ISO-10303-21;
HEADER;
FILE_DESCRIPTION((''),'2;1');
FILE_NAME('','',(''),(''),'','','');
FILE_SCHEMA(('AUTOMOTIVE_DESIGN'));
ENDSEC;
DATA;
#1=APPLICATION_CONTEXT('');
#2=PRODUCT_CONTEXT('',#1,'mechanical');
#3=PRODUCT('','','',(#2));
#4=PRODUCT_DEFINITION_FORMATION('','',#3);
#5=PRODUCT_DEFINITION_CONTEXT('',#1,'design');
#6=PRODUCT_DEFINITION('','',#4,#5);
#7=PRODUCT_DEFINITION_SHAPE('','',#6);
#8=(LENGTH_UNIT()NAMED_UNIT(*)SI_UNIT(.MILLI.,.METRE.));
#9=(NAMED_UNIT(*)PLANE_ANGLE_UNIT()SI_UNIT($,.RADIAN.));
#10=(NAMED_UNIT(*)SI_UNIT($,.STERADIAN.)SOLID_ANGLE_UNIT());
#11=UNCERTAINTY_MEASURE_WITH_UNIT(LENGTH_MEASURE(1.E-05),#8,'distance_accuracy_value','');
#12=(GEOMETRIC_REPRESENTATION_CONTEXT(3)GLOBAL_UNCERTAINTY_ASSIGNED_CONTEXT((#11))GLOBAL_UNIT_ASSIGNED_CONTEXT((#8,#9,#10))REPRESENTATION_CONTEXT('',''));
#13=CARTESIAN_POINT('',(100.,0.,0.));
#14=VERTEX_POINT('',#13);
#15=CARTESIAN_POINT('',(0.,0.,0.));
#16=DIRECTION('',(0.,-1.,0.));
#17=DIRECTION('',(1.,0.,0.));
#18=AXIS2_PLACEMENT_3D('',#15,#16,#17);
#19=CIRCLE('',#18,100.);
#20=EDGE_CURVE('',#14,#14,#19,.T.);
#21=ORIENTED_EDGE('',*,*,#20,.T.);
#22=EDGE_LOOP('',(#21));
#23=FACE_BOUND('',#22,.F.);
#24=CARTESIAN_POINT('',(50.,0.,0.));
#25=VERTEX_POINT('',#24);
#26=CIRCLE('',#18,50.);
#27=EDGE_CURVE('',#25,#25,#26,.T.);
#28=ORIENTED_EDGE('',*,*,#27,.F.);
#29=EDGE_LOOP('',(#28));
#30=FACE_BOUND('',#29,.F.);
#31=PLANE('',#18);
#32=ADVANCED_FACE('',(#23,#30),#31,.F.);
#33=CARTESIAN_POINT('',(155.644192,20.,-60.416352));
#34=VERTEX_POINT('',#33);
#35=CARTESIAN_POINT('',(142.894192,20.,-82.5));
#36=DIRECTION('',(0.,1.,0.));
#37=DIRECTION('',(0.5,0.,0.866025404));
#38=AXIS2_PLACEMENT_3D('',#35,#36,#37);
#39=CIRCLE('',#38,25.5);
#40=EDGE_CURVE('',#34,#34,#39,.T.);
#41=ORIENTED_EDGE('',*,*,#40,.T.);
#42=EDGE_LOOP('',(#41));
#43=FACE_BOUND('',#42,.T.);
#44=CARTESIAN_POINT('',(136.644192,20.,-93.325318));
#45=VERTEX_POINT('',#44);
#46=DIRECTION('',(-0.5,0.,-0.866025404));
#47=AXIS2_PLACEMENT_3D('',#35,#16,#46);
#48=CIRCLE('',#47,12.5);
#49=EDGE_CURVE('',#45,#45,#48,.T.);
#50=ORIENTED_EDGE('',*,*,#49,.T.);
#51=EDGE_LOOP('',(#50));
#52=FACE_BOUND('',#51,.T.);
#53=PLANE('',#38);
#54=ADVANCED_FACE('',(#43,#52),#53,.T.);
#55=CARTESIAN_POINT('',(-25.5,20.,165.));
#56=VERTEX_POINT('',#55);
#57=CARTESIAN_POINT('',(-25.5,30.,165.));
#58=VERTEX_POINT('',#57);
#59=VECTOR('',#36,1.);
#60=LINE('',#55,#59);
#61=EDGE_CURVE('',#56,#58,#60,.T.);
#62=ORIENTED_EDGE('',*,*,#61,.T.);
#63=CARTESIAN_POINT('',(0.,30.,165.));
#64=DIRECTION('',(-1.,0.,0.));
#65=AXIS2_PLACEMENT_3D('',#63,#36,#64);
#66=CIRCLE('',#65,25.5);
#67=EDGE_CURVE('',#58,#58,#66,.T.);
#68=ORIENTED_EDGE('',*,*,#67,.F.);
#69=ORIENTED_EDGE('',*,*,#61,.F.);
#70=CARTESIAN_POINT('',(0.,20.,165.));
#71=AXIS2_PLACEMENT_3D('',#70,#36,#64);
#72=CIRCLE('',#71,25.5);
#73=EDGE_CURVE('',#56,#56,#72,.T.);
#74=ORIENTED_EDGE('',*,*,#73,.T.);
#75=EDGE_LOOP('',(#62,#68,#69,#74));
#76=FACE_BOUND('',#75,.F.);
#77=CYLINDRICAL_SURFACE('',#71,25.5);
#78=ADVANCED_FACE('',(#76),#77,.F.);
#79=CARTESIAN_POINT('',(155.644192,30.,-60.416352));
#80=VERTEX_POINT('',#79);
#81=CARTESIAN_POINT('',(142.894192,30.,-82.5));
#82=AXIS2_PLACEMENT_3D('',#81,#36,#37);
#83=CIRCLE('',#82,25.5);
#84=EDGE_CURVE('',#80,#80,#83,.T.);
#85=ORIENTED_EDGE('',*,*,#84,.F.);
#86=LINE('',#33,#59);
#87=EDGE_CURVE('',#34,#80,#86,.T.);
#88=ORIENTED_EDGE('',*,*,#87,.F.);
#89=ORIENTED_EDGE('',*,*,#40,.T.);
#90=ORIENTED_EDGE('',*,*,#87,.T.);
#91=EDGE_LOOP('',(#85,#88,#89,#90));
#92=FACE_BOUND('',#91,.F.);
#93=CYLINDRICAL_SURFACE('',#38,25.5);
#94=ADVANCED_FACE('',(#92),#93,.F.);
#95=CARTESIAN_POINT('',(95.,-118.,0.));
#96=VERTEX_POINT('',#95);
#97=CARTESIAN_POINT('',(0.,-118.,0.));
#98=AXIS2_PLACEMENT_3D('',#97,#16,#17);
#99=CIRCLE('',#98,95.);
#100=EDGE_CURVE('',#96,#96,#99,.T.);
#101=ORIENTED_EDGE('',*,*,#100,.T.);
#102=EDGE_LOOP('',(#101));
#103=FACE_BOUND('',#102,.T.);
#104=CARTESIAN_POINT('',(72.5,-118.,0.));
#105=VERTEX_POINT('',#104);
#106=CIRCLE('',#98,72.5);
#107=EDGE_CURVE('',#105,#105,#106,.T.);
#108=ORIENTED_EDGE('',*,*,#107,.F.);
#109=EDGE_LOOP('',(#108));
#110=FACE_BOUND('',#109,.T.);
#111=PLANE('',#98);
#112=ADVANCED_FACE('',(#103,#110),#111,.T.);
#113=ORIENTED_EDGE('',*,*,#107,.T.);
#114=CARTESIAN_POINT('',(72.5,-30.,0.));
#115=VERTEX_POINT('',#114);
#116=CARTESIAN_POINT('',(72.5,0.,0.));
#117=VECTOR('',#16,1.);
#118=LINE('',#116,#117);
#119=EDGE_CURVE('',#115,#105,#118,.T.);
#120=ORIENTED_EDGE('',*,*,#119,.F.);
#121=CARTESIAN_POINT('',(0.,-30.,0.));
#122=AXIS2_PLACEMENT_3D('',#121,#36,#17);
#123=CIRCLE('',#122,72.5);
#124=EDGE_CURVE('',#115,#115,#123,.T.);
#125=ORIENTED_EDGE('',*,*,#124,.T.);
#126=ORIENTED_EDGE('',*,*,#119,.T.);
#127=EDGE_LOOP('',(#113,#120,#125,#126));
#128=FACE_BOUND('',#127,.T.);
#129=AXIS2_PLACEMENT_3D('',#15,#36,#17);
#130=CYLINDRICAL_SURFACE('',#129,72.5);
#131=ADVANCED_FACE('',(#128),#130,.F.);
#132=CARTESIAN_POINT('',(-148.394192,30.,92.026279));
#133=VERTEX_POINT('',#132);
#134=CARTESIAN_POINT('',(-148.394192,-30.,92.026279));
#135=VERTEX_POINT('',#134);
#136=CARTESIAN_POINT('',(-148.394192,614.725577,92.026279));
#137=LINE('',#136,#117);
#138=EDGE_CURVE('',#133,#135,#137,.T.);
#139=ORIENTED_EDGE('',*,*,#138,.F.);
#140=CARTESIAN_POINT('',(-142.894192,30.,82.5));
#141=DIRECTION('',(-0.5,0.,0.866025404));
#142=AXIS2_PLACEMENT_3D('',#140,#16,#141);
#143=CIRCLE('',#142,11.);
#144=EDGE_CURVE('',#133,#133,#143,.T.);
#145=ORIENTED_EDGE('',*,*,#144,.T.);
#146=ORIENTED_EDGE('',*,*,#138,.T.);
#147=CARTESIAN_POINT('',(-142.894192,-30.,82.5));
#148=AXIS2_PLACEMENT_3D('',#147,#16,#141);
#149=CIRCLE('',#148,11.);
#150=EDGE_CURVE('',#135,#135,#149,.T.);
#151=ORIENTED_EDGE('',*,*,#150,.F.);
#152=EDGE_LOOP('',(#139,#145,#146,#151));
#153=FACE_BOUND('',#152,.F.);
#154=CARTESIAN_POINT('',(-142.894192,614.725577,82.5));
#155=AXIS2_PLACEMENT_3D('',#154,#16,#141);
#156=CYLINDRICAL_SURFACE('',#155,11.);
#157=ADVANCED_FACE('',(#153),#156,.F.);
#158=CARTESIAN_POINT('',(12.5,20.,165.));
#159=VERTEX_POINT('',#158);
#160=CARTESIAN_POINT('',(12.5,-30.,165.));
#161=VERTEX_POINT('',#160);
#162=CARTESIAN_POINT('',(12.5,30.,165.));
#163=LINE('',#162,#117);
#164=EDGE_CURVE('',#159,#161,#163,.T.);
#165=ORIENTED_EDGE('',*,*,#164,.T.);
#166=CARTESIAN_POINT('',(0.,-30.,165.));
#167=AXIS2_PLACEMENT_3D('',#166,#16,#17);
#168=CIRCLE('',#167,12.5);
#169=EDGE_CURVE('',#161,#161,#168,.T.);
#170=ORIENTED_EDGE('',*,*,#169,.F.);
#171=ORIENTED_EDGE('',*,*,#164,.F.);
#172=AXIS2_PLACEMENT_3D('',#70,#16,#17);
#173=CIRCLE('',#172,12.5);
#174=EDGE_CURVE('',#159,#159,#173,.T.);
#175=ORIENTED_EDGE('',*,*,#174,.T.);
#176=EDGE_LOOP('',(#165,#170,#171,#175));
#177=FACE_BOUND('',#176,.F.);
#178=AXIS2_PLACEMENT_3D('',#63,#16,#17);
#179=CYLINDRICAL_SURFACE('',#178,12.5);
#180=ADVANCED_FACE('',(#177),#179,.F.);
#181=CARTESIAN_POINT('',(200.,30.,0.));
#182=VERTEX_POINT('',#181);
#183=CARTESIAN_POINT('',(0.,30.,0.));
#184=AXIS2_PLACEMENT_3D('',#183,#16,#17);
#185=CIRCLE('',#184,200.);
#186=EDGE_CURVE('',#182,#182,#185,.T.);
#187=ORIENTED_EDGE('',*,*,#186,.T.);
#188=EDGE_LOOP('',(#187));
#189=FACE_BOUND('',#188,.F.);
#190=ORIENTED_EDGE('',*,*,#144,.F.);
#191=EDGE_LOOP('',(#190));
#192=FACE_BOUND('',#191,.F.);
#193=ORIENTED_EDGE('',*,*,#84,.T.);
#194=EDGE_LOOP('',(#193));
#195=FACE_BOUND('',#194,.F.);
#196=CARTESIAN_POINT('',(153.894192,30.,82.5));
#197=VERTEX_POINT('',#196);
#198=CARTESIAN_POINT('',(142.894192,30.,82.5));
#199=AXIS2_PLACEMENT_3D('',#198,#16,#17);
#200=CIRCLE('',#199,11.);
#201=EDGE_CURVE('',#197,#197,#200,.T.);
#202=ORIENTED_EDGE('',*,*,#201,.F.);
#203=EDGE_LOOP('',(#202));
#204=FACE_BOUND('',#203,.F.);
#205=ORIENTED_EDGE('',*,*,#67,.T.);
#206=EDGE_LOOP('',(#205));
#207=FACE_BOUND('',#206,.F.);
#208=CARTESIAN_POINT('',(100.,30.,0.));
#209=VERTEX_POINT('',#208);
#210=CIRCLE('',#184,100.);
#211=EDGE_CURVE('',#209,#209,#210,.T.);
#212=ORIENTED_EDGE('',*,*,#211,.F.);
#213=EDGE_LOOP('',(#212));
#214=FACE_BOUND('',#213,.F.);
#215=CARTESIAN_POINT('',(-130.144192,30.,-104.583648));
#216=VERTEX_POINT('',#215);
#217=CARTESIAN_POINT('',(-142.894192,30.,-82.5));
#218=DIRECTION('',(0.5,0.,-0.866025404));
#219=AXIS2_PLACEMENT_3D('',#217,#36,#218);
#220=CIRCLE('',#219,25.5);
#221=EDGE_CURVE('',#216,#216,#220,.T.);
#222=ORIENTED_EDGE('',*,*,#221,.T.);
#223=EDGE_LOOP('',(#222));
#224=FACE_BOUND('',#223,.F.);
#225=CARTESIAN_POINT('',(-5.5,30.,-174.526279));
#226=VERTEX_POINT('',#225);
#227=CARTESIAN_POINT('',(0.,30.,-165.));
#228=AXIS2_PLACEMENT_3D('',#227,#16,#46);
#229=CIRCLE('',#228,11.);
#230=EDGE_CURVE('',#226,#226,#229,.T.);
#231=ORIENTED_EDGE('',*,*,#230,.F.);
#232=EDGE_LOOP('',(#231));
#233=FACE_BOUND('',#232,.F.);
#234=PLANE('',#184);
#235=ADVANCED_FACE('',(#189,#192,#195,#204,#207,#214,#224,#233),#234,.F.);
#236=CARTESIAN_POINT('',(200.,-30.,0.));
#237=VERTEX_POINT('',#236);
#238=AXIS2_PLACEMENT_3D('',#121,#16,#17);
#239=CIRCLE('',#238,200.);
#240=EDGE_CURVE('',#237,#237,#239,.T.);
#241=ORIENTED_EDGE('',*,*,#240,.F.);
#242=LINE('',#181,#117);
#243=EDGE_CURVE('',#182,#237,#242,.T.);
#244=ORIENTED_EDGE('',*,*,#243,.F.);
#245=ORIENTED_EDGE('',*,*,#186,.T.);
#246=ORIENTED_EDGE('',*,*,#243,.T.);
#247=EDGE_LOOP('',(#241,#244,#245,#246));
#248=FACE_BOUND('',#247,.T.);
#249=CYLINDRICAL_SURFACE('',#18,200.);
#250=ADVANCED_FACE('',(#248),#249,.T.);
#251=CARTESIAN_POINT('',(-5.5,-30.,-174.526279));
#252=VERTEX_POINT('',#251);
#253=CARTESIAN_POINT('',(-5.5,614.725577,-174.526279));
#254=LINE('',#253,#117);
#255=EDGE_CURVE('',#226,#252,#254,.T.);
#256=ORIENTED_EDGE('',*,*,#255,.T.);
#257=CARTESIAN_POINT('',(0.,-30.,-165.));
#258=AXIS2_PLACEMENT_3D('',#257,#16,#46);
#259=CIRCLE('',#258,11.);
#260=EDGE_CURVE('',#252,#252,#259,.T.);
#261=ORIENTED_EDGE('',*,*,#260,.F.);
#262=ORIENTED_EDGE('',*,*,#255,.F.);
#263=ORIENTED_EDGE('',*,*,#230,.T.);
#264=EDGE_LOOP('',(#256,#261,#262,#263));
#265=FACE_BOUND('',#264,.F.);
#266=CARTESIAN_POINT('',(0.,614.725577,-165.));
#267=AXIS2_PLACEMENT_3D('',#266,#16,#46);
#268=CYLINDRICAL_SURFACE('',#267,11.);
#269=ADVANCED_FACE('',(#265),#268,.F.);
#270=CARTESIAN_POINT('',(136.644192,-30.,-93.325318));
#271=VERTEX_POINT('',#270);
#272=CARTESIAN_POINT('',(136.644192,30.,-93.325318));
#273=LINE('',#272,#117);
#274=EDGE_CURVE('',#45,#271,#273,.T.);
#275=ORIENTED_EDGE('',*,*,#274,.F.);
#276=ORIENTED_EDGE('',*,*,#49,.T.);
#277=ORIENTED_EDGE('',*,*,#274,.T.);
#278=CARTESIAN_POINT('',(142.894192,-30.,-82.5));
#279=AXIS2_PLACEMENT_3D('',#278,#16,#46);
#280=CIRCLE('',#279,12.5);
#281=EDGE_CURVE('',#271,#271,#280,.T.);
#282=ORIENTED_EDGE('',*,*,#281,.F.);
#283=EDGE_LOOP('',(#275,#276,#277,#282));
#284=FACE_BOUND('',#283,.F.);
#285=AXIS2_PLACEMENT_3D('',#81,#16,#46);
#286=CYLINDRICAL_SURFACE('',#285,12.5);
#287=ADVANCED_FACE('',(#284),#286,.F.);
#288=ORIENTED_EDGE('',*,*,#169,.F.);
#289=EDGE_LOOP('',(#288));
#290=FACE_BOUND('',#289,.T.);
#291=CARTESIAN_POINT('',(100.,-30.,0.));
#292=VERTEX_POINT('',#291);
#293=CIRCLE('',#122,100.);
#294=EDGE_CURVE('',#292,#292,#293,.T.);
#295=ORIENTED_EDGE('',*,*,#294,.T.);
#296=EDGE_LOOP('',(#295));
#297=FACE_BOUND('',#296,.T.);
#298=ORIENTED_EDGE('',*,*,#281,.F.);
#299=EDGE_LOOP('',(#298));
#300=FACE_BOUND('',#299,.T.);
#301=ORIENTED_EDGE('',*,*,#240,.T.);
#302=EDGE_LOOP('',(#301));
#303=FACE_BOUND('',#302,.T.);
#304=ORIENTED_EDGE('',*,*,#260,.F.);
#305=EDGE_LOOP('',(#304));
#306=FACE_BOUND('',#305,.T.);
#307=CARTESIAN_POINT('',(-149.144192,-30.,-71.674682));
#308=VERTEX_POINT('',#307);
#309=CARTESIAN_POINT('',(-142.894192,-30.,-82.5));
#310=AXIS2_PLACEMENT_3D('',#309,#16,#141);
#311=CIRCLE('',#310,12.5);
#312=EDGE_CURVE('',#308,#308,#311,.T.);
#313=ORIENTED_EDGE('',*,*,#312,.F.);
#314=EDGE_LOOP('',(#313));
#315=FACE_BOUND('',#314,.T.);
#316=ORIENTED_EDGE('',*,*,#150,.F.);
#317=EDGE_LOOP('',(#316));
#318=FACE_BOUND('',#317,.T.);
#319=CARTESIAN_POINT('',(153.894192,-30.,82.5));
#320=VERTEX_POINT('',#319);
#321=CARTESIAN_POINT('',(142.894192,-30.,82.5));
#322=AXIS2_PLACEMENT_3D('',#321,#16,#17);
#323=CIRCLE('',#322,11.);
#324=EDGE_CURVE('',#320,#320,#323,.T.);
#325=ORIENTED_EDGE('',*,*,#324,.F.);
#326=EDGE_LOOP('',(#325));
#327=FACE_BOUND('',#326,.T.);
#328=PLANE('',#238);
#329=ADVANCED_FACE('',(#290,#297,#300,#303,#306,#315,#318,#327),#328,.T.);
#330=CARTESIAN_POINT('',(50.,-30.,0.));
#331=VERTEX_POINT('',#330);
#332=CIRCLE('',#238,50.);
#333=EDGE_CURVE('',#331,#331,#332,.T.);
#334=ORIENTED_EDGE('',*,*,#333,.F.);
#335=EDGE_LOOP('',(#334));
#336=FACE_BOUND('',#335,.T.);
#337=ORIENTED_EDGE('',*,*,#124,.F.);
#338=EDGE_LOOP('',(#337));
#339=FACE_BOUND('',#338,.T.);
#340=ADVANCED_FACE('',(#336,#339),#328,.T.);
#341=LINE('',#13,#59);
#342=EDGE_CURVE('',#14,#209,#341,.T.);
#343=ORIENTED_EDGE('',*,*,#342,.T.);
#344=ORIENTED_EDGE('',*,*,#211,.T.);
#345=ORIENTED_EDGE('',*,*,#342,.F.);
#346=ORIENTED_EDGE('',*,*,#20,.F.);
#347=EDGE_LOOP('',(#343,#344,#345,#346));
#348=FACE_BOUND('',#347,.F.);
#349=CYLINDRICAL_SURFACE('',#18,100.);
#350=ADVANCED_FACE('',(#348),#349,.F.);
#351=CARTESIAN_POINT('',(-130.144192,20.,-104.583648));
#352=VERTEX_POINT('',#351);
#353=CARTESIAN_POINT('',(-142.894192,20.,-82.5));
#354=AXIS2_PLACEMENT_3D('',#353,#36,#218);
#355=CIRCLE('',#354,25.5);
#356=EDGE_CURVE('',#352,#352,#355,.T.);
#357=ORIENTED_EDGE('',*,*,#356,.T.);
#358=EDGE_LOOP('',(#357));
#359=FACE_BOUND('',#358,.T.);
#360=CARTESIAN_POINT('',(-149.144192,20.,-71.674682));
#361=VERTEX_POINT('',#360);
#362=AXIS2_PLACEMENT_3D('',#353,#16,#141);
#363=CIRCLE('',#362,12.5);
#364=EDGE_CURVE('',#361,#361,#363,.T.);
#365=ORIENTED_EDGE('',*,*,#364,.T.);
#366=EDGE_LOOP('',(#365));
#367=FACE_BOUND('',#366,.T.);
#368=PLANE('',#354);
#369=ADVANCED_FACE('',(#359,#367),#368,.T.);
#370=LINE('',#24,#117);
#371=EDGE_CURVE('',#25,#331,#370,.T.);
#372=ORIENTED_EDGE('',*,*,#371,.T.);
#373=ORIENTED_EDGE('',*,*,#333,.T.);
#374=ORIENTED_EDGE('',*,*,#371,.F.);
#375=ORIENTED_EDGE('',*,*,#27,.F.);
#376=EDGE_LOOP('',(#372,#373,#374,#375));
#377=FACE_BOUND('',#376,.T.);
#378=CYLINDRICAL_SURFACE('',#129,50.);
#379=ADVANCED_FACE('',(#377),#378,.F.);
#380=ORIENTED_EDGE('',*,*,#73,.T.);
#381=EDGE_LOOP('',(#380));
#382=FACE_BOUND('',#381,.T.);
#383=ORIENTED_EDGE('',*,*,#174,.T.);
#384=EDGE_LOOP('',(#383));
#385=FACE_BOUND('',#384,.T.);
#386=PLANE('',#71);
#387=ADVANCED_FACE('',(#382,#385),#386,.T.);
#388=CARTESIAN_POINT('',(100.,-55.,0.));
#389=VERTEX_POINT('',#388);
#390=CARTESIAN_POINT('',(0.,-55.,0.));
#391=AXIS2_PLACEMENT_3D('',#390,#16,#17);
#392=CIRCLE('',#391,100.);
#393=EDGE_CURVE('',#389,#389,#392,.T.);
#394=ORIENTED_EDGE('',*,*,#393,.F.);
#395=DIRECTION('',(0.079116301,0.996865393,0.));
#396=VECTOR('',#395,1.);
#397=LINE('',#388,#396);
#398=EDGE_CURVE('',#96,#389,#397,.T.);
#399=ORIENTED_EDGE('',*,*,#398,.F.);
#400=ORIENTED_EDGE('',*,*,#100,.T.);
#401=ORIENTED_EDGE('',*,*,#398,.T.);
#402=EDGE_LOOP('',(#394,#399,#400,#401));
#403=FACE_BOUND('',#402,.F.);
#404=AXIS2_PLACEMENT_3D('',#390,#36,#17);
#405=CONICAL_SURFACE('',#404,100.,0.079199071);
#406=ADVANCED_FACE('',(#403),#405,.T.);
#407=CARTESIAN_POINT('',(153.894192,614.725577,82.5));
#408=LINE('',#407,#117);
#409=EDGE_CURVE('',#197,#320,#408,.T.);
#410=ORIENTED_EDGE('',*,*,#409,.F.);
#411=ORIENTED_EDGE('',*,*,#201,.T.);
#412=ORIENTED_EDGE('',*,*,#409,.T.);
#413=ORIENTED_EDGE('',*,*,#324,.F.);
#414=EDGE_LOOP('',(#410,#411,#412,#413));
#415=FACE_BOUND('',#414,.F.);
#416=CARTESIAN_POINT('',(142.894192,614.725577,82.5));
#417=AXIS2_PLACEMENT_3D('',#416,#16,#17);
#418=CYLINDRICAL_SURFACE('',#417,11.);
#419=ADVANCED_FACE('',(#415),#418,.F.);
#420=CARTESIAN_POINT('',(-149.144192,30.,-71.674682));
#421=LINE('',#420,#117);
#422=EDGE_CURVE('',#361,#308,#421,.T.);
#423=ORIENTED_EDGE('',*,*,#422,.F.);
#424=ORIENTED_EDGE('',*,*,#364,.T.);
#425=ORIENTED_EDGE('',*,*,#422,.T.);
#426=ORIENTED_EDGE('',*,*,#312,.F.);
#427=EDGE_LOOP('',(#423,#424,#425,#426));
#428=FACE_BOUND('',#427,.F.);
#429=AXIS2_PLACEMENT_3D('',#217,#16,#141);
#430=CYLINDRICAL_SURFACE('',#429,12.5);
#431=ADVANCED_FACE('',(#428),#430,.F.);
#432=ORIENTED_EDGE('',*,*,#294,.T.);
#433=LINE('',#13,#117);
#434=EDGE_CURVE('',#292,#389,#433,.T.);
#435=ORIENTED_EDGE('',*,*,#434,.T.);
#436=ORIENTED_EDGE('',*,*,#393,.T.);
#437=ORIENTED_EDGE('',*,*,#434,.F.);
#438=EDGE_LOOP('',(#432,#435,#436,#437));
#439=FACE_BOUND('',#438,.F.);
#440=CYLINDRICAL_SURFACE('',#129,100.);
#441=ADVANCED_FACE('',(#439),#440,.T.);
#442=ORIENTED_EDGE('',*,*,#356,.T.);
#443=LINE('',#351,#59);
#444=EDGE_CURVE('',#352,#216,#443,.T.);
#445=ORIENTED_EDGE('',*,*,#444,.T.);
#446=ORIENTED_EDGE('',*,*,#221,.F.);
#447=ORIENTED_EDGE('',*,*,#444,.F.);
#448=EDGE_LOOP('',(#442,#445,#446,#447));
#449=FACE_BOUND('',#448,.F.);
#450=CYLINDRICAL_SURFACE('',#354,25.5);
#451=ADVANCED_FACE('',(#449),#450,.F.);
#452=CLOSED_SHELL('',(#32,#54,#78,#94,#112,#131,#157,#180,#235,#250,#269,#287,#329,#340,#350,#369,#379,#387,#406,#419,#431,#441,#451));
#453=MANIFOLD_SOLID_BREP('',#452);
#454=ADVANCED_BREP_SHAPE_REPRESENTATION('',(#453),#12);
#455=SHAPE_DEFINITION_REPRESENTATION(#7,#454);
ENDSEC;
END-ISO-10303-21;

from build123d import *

# Parameters (mm, degrees)
F0_R            = 200
F0_R_2          = 100
F0_R_3          = 72.5
F0_R_4          = 50
F1_DEPTH        = 30
F2_DEPTH        = 118
F3_DEPTH        = 30
F5_D            = 25
F5_CBORE_D      = 51
F5_CBORE_DEPTH  = 10
F5_COPIES_COUNT = 3
F6_D            = 22
F6_COPIES_COUNT = 3
F7_SIZE2        = 63
F7_SIZE         = 5


# Not quite as in the source:
# - a pattern or mirror of a feature is missing from the dataset's text; its kind, count and spacing are read off the source's solid


with BuildPart() as f1:
    # F0 (on Front) → F1 (new body)
    with BuildSketch(Plane.XZ):
        Circle(F0_R)
        Circle(F0_R_2, mode=Mode.SUBTRACT)
        Circle(F0_R_2)
        Circle(F0_R_3, mode=Mode.SUBTRACT)
        Circle(F0_R_3)
        Circle(F0_R_4, mode=Mode.SUBTRACT)
    extrude(amount=F1_DEPTH)

    # F0 (on Front) → F2 (join)
    with BuildSketch(Plane.XZ):
        Circle(F0_R_2)
        Circle(F0_R_3, mode=Mode.SUBTRACT)
    extrude(amount=F2_DEPTH)

    # F0 (on Front) → F3 (join)
    with BuildSketch(Plane.XZ):
        Circle(F0_R)
        Circle(F0_R_2, mode=Mode.SUBTRACT)
    extrude(amount=-F3_DEPTH)

    # F5 (through all)
    with Locations(Plane(origin=(0, 30, 0), x_dir=(-1, 0, 0), z_dir=(0, 1, 0))):
        with Locations((0, 165)):
            f5 = CounterBoreHole(F5_D / 2, F5_CBORE_D / 2, F5_CBORE_DEPTH)

    # F5_copies: F5 ×3 about axis
    f5_copies_axis = Axis((0, 0, 0), (0, 1, 0))
    for i in range(1, F5_COPIES_COUNT):
        add(f5.rotate(f5_copies_axis, i * 360 / F5_COPIES_COUNT), mode=Mode.SUBTRACT)

    # F6 (through all)
    with Locations(Plane(origin=(0, 30, 0), x_dir=(-1, 0, 0), z_dir=(0, 1, 0))):
        with Locations((-142.8941916244, 82.5)):
            f6 = Hole(F6_D / 2)

    # F6_copies: F6 ×3 about axis
    f6_copies_axis = Axis((0, 0, 0), (0, 1, 0))
    for i in range(1, F6_COPIES_COUNT):
        add(f6.rotate(f6_copies_axis, i * 360 / F6_COPIES_COUNT), mode=Mode.SUBTRACT)

    # F7
    f7_edges = [f1.edges().sort_by_distance(p)[0] for p in [
        (-100, -118, 0),
    ]]
    f7_side = f1.faces().sort_by_distance((-97.171573, -118, 0))[0]
    chamfer(f7_edges, length=F7_SIZE, length2=F7_SIZE2, reference=f7_side)


solid = f1.part
